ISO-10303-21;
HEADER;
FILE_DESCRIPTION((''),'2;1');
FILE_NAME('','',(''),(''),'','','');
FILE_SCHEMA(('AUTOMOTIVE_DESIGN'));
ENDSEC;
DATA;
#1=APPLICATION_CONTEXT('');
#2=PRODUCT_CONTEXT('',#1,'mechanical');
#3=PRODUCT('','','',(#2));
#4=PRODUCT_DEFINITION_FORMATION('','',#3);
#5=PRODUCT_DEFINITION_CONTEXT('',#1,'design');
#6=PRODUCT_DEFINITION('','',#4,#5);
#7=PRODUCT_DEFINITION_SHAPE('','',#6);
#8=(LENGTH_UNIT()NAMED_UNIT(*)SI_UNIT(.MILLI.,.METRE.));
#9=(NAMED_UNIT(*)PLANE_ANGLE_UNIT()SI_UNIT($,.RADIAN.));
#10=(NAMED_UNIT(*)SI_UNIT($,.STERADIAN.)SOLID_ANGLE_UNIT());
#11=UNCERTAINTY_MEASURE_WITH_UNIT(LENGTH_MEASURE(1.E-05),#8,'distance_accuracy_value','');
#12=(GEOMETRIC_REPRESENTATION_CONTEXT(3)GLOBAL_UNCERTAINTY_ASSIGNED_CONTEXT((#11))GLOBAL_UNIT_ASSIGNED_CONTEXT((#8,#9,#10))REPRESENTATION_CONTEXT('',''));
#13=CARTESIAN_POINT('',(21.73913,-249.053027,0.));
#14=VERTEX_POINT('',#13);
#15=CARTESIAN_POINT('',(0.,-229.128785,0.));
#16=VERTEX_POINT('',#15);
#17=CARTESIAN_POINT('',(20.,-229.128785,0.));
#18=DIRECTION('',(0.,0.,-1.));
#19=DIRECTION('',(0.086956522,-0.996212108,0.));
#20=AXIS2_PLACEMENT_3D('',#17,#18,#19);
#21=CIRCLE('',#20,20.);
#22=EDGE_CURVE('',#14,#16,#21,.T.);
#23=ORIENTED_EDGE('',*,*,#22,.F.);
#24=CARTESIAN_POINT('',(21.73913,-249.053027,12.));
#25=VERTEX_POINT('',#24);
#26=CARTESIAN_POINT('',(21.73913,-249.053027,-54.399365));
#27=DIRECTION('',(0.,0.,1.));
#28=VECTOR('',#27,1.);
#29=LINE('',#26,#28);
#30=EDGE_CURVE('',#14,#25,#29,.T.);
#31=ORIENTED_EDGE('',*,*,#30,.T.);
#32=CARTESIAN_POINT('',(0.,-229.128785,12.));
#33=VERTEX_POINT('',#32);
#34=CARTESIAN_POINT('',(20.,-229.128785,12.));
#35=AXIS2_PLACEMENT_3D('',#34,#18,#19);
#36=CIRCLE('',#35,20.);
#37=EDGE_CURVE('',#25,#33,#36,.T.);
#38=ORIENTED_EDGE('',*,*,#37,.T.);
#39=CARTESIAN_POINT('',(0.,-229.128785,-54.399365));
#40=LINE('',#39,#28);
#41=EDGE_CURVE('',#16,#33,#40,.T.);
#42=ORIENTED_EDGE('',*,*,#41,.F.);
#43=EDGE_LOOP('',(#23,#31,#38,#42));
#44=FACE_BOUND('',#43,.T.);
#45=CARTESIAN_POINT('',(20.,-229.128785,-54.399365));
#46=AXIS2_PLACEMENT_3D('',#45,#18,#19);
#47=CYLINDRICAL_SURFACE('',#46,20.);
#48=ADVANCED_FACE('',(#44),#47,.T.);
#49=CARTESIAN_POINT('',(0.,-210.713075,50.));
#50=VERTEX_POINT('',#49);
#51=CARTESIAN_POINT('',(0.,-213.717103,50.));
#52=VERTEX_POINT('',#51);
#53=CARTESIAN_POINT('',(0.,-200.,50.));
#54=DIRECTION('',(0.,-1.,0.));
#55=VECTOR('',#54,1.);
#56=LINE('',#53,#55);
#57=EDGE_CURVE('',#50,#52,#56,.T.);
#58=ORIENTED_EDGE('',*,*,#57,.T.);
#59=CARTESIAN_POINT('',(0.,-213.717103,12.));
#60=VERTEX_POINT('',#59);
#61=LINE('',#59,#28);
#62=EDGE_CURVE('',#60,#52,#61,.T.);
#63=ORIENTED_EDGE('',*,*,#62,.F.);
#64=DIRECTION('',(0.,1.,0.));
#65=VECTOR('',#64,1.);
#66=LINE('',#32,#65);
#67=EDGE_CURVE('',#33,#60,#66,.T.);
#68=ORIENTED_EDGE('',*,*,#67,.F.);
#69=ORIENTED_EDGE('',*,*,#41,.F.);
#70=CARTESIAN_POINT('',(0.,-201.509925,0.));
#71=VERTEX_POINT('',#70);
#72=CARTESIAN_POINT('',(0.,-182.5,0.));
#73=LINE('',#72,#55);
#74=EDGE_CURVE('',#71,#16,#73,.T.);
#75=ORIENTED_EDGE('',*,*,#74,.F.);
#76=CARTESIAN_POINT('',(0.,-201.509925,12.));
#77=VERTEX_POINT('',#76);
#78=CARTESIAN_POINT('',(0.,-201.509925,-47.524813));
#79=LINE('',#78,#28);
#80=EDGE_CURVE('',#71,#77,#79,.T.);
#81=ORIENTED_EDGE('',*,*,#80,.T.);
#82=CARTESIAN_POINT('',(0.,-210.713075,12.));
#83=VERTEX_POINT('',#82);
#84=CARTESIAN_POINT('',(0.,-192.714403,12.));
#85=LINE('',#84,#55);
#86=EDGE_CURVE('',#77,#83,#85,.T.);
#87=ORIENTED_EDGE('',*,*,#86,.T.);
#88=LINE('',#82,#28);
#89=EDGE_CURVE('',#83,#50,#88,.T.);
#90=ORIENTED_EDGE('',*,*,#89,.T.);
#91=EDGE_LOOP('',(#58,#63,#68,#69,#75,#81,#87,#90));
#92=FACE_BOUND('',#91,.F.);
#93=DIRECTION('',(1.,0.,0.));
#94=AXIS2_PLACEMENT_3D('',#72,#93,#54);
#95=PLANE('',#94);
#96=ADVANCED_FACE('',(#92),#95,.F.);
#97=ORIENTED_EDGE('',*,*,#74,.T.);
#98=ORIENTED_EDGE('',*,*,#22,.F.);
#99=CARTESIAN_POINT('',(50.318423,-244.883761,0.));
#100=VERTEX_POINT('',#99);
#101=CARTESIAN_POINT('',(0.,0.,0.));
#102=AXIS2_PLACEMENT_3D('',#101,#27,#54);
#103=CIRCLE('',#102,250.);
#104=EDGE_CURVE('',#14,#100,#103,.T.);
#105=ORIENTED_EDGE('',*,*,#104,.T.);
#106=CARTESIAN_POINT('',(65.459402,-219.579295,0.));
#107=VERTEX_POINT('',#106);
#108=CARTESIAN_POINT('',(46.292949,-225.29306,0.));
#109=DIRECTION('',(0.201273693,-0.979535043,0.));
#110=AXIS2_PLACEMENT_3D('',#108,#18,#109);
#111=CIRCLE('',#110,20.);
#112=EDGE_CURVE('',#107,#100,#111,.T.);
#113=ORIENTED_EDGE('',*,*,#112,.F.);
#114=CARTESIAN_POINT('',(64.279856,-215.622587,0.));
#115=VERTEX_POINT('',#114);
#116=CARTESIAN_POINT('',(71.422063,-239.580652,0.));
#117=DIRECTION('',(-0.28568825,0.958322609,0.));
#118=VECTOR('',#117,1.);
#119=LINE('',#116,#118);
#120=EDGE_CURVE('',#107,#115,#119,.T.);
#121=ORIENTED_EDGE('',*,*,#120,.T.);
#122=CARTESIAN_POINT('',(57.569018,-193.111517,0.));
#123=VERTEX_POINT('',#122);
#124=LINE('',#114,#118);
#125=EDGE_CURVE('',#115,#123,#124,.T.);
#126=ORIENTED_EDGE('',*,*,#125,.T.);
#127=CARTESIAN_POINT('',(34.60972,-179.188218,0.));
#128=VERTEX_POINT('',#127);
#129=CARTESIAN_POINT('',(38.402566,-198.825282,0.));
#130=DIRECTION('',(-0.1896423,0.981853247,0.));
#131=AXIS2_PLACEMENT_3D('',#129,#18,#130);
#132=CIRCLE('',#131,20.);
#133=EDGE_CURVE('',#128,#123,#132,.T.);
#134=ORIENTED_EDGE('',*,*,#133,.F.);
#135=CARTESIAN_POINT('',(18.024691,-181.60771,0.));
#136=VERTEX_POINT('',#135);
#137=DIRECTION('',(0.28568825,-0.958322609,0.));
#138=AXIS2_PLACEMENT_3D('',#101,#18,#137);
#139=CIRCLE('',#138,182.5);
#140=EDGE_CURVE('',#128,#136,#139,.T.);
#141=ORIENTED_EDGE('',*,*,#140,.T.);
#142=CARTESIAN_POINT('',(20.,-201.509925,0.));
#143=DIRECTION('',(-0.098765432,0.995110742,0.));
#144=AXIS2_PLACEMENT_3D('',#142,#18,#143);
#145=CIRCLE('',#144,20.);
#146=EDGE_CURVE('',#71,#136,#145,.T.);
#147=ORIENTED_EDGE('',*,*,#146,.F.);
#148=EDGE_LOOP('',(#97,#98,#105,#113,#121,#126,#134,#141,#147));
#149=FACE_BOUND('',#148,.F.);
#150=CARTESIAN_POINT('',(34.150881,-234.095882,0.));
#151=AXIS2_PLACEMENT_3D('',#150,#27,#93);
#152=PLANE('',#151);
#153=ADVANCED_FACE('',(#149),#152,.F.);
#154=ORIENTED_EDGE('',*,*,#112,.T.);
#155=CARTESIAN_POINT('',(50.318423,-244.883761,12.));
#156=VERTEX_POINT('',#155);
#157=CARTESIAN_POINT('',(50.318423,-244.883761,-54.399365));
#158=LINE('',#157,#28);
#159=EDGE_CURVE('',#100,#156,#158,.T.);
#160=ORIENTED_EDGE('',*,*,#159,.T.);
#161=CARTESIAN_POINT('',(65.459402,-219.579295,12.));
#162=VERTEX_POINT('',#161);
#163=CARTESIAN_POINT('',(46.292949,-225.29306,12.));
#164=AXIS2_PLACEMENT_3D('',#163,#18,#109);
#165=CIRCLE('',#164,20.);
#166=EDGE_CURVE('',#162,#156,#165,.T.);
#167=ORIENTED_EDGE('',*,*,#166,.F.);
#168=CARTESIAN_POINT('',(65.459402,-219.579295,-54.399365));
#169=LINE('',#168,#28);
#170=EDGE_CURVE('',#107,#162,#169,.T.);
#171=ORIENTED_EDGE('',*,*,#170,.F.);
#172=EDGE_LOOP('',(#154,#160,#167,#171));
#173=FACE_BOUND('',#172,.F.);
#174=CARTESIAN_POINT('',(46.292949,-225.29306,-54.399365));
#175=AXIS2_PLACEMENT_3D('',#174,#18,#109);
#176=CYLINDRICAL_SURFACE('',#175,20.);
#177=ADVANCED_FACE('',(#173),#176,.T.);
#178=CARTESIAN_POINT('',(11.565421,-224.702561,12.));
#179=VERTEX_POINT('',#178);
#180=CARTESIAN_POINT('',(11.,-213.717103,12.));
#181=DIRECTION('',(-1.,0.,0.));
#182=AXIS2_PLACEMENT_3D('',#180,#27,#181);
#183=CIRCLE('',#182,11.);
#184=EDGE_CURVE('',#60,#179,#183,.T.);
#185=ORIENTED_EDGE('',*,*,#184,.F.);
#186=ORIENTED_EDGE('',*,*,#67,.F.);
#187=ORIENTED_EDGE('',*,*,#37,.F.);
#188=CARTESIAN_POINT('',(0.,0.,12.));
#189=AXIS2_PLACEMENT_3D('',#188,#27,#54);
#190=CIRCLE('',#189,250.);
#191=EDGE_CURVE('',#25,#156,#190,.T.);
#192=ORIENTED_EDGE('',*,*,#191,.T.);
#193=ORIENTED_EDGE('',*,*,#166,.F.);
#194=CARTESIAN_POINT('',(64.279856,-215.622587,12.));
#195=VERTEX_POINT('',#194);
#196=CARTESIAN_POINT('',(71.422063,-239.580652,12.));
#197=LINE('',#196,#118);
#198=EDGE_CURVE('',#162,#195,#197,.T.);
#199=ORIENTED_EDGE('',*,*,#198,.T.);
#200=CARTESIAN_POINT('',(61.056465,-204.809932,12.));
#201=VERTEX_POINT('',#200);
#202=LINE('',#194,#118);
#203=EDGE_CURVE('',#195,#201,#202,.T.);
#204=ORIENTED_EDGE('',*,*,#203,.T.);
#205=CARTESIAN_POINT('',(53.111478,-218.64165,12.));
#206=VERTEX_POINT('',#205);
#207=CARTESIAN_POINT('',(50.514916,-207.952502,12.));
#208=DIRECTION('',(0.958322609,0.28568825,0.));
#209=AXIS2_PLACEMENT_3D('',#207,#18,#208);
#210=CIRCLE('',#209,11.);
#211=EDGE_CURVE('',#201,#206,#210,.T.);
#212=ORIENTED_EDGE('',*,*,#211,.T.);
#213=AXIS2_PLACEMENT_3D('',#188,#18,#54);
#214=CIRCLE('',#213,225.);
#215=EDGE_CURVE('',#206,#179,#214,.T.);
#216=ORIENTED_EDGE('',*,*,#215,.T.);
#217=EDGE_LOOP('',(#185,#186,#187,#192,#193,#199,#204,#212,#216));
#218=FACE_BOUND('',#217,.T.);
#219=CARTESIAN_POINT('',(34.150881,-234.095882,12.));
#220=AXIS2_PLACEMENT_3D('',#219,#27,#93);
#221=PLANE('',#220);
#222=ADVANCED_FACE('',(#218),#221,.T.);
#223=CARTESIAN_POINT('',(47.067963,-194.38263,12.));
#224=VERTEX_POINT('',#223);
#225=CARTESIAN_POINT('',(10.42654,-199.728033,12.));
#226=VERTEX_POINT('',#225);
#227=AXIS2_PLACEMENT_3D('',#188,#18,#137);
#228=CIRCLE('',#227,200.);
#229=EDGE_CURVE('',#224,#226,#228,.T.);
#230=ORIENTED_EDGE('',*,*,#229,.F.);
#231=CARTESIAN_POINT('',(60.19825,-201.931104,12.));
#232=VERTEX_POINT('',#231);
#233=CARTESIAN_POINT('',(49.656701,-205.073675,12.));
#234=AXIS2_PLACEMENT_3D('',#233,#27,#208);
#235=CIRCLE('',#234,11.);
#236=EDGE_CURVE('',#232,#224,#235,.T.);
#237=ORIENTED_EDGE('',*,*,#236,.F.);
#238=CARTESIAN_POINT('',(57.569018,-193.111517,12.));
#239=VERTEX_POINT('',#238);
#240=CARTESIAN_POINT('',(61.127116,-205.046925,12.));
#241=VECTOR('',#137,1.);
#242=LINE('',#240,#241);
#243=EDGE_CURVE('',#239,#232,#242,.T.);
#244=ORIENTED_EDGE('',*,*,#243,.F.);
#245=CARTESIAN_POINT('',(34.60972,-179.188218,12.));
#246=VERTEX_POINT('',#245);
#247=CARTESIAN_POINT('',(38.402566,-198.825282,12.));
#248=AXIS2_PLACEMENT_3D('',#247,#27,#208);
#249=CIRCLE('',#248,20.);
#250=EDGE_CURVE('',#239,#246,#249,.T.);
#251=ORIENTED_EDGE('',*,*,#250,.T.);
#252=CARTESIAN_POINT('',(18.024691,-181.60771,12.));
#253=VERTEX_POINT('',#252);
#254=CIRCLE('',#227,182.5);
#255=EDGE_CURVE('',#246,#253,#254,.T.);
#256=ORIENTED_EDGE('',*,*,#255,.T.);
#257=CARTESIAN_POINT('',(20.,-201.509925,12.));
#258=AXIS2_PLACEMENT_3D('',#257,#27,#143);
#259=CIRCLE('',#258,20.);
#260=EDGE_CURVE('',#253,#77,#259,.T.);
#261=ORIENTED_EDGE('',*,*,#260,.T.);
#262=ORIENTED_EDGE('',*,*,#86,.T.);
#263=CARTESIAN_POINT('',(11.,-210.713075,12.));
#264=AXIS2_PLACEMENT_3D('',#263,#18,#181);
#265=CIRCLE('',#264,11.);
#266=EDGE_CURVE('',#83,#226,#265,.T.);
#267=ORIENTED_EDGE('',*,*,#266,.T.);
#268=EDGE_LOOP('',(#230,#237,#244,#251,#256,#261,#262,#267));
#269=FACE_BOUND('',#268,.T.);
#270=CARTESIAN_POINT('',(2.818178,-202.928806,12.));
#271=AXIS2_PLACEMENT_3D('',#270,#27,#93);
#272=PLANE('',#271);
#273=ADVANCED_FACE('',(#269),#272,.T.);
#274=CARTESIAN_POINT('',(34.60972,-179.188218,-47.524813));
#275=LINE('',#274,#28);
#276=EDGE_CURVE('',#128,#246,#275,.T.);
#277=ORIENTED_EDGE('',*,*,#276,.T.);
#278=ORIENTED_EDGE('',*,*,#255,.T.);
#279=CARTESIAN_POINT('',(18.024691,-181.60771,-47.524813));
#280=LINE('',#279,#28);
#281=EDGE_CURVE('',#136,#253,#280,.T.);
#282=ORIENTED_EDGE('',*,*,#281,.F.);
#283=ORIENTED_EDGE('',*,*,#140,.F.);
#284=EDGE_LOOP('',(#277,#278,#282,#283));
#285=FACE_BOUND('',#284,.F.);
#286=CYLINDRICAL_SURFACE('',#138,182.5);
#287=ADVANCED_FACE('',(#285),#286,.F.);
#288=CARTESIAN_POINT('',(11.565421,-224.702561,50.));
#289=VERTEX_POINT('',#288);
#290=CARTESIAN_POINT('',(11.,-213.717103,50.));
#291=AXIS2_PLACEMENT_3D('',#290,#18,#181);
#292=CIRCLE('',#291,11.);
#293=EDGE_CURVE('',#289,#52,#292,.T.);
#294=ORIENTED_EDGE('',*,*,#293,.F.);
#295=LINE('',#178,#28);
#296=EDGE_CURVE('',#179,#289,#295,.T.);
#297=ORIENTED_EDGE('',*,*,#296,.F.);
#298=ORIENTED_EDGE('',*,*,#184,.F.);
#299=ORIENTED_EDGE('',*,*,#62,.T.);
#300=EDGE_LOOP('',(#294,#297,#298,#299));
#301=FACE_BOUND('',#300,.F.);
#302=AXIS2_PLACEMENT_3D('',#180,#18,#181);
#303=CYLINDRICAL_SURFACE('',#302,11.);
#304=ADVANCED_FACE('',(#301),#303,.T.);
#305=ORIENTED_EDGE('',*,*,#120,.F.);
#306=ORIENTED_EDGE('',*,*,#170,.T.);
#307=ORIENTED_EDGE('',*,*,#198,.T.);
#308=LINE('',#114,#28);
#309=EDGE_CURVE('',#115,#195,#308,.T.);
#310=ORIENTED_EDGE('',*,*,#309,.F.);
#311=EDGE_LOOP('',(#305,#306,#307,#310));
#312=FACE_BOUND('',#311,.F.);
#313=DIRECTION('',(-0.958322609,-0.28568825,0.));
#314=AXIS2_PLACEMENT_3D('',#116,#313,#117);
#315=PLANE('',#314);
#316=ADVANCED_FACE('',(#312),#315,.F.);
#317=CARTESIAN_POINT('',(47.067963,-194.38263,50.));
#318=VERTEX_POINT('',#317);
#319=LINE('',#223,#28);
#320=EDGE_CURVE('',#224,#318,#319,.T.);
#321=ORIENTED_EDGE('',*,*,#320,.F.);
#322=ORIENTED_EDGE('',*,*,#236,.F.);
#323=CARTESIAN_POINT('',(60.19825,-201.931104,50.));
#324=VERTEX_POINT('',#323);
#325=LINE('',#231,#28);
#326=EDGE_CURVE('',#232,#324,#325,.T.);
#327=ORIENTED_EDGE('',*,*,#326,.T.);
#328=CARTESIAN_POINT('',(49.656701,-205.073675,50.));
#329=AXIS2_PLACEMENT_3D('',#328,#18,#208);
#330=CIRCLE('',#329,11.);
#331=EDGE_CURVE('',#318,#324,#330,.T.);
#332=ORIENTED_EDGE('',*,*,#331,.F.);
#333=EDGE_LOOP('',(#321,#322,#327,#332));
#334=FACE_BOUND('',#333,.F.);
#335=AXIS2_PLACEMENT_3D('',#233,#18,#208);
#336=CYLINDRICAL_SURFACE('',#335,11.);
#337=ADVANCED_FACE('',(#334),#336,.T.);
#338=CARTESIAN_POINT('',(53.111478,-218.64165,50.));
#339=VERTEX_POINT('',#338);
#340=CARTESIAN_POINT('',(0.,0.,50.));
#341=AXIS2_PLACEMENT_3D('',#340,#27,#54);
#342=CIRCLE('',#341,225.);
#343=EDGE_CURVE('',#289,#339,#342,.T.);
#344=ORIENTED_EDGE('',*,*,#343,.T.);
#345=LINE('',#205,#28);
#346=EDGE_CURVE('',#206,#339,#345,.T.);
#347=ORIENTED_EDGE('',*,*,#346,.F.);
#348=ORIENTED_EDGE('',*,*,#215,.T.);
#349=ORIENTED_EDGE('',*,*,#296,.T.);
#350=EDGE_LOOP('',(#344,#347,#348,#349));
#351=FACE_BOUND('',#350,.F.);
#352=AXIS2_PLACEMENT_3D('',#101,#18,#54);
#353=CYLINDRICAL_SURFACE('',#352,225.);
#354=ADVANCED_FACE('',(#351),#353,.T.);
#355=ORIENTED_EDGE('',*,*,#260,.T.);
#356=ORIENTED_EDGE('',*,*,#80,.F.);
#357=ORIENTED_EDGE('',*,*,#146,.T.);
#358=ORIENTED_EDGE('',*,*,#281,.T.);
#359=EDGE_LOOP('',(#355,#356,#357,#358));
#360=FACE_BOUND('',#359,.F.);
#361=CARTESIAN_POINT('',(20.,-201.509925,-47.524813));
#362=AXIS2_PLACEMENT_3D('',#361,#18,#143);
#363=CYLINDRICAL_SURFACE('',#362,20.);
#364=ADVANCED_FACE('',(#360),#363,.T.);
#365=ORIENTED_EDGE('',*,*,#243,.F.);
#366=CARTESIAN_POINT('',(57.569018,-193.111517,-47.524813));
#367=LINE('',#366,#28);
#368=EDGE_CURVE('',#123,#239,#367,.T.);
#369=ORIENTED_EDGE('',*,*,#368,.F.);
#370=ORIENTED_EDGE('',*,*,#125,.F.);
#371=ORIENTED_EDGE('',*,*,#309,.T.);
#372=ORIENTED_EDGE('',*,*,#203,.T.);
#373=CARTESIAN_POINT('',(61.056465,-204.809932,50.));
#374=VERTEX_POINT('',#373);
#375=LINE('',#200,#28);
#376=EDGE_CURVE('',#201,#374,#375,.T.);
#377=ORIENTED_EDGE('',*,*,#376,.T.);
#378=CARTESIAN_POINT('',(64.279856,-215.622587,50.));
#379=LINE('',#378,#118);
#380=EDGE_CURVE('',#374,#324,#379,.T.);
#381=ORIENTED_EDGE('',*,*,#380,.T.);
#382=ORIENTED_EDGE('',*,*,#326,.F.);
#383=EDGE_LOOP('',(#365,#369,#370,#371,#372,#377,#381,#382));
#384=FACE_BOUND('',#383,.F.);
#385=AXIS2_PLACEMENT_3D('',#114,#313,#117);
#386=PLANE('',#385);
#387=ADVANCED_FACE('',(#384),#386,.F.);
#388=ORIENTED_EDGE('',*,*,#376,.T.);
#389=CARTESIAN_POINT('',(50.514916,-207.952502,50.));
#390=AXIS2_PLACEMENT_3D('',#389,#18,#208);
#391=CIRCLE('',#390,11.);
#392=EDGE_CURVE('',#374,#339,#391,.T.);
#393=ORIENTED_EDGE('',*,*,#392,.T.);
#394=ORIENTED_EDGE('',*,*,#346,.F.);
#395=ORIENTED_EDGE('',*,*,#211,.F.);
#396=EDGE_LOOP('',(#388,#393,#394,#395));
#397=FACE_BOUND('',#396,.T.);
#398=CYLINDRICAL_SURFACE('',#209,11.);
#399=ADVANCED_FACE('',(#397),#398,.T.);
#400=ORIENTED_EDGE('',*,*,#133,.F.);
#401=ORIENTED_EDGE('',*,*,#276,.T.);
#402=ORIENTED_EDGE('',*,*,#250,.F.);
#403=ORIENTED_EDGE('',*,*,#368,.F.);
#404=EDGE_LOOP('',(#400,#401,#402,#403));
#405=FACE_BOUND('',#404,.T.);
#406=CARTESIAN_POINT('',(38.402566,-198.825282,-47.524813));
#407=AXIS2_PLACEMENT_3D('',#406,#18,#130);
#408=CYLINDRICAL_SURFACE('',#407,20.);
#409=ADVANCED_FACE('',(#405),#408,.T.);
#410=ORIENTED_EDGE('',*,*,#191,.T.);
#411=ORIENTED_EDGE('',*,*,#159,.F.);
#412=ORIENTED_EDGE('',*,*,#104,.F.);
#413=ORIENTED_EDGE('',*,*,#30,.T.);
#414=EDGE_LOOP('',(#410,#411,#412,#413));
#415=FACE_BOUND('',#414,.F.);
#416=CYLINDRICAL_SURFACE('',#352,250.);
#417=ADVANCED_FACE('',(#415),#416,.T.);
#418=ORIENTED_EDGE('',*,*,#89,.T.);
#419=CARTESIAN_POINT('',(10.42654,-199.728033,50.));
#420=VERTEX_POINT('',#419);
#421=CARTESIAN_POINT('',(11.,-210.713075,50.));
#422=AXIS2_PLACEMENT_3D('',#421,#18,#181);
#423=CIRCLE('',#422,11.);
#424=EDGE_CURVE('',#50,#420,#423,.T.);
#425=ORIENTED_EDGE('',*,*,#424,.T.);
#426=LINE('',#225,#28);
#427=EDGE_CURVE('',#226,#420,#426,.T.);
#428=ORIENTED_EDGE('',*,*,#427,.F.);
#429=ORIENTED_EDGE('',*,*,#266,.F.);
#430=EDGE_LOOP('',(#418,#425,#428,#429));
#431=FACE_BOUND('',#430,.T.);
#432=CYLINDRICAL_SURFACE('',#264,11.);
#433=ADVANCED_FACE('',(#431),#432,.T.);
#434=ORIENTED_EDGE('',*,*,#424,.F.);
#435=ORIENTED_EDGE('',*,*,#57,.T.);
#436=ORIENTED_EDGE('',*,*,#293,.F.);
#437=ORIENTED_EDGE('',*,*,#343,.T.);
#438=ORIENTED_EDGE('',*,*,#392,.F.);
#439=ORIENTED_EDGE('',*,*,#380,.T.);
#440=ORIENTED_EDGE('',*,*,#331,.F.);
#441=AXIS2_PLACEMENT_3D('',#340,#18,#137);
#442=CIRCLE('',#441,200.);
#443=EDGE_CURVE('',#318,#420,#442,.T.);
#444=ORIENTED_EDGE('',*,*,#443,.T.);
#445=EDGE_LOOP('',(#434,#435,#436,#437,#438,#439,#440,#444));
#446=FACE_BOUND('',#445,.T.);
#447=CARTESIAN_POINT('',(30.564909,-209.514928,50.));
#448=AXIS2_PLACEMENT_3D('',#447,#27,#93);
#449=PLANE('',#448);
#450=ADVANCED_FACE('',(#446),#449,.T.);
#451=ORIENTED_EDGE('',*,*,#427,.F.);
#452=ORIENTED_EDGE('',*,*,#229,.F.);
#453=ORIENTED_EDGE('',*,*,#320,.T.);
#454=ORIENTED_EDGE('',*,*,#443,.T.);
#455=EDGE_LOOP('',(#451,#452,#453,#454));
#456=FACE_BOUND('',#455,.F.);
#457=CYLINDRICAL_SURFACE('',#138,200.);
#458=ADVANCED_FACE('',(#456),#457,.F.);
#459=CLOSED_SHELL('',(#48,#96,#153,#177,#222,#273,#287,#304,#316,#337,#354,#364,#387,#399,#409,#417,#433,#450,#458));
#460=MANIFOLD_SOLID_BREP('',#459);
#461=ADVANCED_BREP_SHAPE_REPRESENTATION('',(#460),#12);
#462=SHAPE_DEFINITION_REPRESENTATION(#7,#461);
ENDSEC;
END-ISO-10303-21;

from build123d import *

# Parameters (mm, degrees)
F1_DEPTH    = 12
F2_DEPTH    = 50
F3_T1_DEPTH = 120.7987304743
F3_T3_DEPTH = 107.0496265693
F4_T1_DEPTH = 64.7830881456
F4_T3_DEPTH = 66.9231117077


# Not quite as in the source:
# - a fillet or chamfer that OpenCascade refuses, or shapes differently, is made with other operations: its cross-section is extruded or revolved along the edge and cut away or added


with BuildPart() as f1:
    # F0 (on Top) → F1 (new body)
    with BuildSketch(Plane.XY):
        with BuildLine():
            ThreePointArc((64.2798563582, -215.6225870974), (32.480131643, -222.643304522), (0, -225))
            Line((0, -225), (0, -250))
            ThreePointArc((0, -250), (36.0890351588, -247.3814494688), (71.4220626202, -239.5806523304))
            Line((71.4220626202, -239.5806523304), (64.2798563582, -215.6225870974))
        make_face()
        with BuildLine():
            ThreePointArc((57.1376500962, -191.6645218643), (28.8712281271, -197.9051595751), (0, -200))
            Line((0, -200), (0, -225))
            ThreePointArc((0, -225), (32.480131643, -222.643304522), (64.2798563582, -215.6225870974))
            Line((64.2798563582, -215.6225870974), (57.1376500962, -191.6645218643))
        make_face()
        with BuildLine():
            ThreePointArc((52.1381057128, -174.8938762012), (26.344995666, -180.5884581123), (0, -182.5))
            Line((0, -182.5), (0, -200))
            ThreePointArc((0, -200), (28.8712281271, -197.9051595751), (57.1376500962, -191.6645218643))
            Line((57.1376500962, -191.6645218643), (52.1381057128, -174.8938762012))
        make_face()
    extrude(amount=F1_DEPTH)

    # F0 (on Top) → F2 (join)
    with BuildSketch(Plane.XY):
        with BuildLine():
            ThreePointArc((57.1376500962, -191.6645218643), (28.8712281271, -197.9051595751), (0, -200))
            Line((0, -200), (0, -225))
            ThreePointArc((0, -225), (32.480131643, -222.643304522), (64.2798563582, -215.6225870974))
            Line((64.2798563582, -215.6225870974), (57.1376500962, -191.6645218643))
        make_face()
    extrude(amount=F2_DEPTH)

    # F3: fillet of radius 20 on 4 edges, made by hand

    # F3_s2 → F3_t1 (cut)
    with BuildSketch(Plane.XY.offset(-54.3993652372)):
        with BuildLine():
            ThreePointArc((21.7391304348, -249.0530268998), (6.4867215062, -243.8729803633), (0, -229.1287847478))
            Line((0, -229.1287847478), (0, -250))
            ThreePointArc((0, -250), (10.8798730474, -249.7631445239), (21.7391304348, -249.0530268998))
        make_face()
        with BuildLine():
            ThreePointArc((50.3184233293, -244.883760739), (63.4552732198, -235.5621710033), (65.4594016494, -219.5792948702))
            Line((65.4594016494, -219.5792948702), (71.4220626202, -239.5806523304))
            ThreePointArc((71.4220626202, -239.5806523304), (60.9279674657, -242.4619202689), (50.3184233293, -244.883760739))
        make_face()
    extrude(amount=F3_T1_DEPTH, mode=Mode.SUBTRACT)

    # F3_s4 → F3_t3 (cut)
    with BuildSketch(Plane.XY.offset(-47.5248132847)):
        with BuildLine():
            ThreePointArc((18.024691358, -181.6077104681), (5.1759288176, -188.0843186765), (0, -201.5099253139))
            Line((0, -201.5099253139), (0, -182.5))
            ThreePointArc((0, -182.5), (9.0233818378, -182.2767911178), (18.024691358, -181.6077104681))
        make_face()
        with BuildLine():
            ThreePointArc((34.609719823, -179.1882175082), (48.7732703354, -181.7241570951), (57.5690180175, -193.111517431))
            Line((57.5690180175, -193.111517431), (52.1381057128, -174.8938762012))
            ThreePointArc((52.1381057128, -174.8938762012), (43.42702673, -177.2578442535), (34.609719823, -179.1882175082))
        make_face()
    extrude(amount=F3_T3_DEPTH, mode=Mode.SUBTRACT)

    # F4: fillet of radius 11 on 4 edges, made by hand

    # F4_s2 → F4_t1 (cut)
    with BuildSketch(Plane.XY.offset(12)):
        with BuildLine():
            ThreePointArc((0, -210.7130750571), (3.0216525247, -203.140362758), (10.4265402844, -199.7280332294))
            Line((10.4265402844, -199.7280332294), (10.3691943128, -198.6295290467))
            ThreePointArc((10.3691943128, -198.6295290467), (5.2147333965, -198.83162866), (0.0567649923, -198.8999918998))
            Line((0.0567649923, -198.8999918998), (-1.0397817327, -199.9169455148))
            ThreePointArc((-1.0397817327, -199.9169455148), (-1.1, -201.5099253139), (-1.1, -210.7130750571))
            Line((-1.1, -210.7130750571), (0, -210.7130750571))
        make_face()
        with BuildLine():
            ThreePointArc((60.1982497665, -201.9311039069), (55.1390969064, -195.5372531202), (47.0679630938, -194.3826300115))
            Line((47.0679630938, -194.3826300115), (46.8090892968, -193.3135255465))
            ThreePointArc((46.8090892968, -193.3135255465), (51.8064632167, -192.0346332539), (56.768991531, -190.6265763228))
            Line((56.768991531, -190.6265763228), (58.1103687488, -191.2878754492))
            ThreePointArc((58.1103687488, -191.2878754492), (58.6231728877, -192.7972603555), (61.2524046367, -201.6168468313))
            Line((61.2524046367, -201.6168468313), (60.1982497665, -201.9311039069))
        make_face()
    extrude(amount=F4_T1_DEPTH, mode=Mode.SUBTRACT)

    # F4_s4 → F4_t3 (cut)
    with BuildSketch(Plane.XY.offset(12)):
        with BuildLine():
            ThreePointArc((0, -213.7171027316), (3.4243688767, -221.6926787663), (11.5654205607, -224.7025612833))
            ThreePointArc((11.5654205607, -224.7025612833), (5.7846223415, -224.9256280293), (0, -225))
            Line((0, -225), (0, -213.7171027316))
        make_face()
        with BuildLine():
            ThreePointArc((61.0564651772, -204.8099315465), (60.0533434239, -213.4314083362), (53.1114776019, -218.6416496163))
            ThreePointArc((53.1114776019, -218.6416496163), (58.7150747837, -217.2039133928), (64.2798563582, -215.6225870974))
            Line((64.2798563582, -215.6225870974), (61.0564651772, -204.8099315465))
        make_face()
    extrude(amount=F4_T3_DEPTH, mode=Mode.SUBTRACT)


solid = f1.part
